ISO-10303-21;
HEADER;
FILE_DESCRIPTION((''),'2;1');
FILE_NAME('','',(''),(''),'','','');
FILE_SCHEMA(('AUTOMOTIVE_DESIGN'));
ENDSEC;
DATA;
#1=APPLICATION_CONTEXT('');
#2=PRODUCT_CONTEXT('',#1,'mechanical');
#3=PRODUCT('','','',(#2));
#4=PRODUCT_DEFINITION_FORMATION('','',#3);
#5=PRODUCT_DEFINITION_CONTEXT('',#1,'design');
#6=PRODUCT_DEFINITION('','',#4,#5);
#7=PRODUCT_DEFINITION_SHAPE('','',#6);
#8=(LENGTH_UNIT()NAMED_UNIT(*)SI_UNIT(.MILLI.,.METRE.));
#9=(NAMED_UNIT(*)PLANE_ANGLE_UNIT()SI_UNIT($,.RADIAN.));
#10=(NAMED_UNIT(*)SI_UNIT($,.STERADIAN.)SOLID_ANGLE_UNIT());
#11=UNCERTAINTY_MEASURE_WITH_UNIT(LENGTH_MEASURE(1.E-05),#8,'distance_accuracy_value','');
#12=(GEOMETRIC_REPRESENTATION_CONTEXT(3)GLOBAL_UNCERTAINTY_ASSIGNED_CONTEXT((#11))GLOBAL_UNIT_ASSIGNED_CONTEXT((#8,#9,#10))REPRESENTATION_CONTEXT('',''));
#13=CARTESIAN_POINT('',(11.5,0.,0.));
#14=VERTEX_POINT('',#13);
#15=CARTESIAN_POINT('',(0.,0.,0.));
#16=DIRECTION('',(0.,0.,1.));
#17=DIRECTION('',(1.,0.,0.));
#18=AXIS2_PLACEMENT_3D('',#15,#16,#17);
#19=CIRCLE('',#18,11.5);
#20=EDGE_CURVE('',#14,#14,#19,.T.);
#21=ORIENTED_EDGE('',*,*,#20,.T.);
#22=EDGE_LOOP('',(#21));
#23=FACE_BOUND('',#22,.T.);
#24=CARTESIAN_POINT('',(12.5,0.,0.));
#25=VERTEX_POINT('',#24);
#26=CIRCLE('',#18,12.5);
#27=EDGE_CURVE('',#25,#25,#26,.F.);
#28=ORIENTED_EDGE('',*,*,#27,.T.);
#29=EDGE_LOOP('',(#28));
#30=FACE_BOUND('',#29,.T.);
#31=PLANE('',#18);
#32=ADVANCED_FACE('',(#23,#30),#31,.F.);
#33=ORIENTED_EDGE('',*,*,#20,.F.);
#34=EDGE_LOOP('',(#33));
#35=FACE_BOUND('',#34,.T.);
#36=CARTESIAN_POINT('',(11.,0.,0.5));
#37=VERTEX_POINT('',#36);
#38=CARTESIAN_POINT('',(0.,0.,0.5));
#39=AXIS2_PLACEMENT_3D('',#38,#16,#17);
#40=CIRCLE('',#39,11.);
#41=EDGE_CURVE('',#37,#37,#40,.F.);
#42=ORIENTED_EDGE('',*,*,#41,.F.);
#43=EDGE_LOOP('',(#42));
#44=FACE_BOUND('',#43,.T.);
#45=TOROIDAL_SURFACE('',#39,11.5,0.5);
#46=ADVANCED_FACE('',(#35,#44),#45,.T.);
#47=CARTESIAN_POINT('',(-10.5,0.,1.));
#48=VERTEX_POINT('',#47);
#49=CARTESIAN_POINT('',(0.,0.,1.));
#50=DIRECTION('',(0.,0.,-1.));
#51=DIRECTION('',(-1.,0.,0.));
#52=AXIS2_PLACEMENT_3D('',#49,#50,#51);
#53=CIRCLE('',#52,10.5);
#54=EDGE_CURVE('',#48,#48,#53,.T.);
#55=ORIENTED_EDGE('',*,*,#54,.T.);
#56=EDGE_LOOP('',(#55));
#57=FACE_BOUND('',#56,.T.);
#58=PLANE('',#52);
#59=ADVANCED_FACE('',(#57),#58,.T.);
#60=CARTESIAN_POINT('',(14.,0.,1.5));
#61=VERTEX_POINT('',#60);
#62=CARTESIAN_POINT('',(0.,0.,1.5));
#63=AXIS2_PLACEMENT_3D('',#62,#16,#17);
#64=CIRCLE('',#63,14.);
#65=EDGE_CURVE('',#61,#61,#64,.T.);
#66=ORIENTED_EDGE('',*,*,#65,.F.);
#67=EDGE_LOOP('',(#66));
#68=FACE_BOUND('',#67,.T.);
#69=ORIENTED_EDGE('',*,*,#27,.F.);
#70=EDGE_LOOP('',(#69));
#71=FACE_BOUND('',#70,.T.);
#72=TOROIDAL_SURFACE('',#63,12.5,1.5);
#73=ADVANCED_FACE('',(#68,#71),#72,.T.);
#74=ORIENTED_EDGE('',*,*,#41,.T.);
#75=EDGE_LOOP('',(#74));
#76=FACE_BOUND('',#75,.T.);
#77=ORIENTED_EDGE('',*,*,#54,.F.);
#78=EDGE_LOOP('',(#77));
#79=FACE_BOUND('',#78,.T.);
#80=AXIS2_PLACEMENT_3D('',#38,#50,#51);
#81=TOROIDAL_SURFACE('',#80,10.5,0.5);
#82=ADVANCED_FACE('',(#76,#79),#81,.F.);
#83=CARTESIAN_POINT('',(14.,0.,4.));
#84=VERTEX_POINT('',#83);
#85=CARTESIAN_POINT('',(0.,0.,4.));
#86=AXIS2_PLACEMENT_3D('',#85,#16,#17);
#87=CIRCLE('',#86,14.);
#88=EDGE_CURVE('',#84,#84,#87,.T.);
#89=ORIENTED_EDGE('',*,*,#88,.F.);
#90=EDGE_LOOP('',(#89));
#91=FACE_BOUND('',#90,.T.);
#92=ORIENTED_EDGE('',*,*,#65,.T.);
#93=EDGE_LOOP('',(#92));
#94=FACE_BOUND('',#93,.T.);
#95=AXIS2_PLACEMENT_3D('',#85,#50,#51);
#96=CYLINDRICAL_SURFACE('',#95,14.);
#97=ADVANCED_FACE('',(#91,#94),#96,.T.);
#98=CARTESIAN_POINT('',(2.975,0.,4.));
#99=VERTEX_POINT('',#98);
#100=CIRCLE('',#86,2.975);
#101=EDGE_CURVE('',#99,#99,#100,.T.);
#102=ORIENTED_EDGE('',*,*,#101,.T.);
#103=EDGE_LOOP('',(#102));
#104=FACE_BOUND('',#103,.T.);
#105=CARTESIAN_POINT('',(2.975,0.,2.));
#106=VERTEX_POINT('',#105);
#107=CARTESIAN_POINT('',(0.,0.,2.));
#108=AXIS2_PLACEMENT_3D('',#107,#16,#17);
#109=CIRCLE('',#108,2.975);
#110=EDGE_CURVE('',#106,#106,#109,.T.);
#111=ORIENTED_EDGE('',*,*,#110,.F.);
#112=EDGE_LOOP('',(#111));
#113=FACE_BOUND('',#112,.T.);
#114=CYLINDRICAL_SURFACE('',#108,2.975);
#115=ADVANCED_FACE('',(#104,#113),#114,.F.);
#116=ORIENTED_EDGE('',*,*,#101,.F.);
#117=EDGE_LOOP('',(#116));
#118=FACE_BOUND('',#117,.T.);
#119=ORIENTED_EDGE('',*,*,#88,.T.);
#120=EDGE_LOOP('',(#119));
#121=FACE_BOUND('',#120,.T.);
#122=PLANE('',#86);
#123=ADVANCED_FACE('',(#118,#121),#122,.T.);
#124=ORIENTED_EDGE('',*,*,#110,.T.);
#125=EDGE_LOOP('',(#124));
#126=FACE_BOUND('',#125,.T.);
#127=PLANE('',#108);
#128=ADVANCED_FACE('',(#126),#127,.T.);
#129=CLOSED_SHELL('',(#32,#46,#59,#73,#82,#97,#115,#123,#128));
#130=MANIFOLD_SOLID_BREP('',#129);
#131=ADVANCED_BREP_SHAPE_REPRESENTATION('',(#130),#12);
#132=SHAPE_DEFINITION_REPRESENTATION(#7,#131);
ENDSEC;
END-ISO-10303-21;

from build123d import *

# Parameters (mm, degrees)
SKETCH1_R           = 14
BOSS_EXTRUDE1_DEPTH = 4
SKETCH2_R           = 2.975
CUT_EXTRUDE1_DEPTH  = 2
SKETCH3_R           = 11
CUT_EXTRUDE2_DEPTH  = 1
FILLET1_R           = 0.5
FILLET2_R           = 1.5


with BuildPart() as part:
    # Sketch1 → Boss-Extrude1 (new body)
    with BuildSketch(Plane.XY):
        Circle(SKETCH1_R)
    extrude(amount=BOSS_EXTRUDE1_DEPTH)

    # Sketch2 → Cut-Extrude1 (cut)
    with BuildSketch(Plane.XY.offset(4)):
        Circle(SKETCH2_R)
    extrude(amount=-CUT_EXTRUDE1_DEPTH, mode=Mode.SUBTRACT)

    # Sketch3 → Cut-Extrude2 (cut)
    with BuildSketch(Plane(origin=(0, 0, 0), x_dir=(-1, 0, 0), z_dir=(0, 0, -1))):
        Circle(SKETCH3_R)
    extrude(amount=-CUT_EXTRUDE2_DEPTH, mode=Mode.SUBTRACT)

    # Fillet1
    fillet1_edges = [part.edges().sort_by_distance(p)[0] for p in [
        (11, 0, 1),
        (11, 0, 0),
    ]]
    fillet(fillet1_edges, radius=FILLET1_R - 0.0001)  # a hair under: the kernel refuses the full size

    # Fillet2
    fillet2_edges = [part.edges().sort_by_distance(p)[0] for p in [
        (-14, 0, 0),
    ]]
    fillet(fillet2_edges, radius=FILLET2_R)


solid = part.part
